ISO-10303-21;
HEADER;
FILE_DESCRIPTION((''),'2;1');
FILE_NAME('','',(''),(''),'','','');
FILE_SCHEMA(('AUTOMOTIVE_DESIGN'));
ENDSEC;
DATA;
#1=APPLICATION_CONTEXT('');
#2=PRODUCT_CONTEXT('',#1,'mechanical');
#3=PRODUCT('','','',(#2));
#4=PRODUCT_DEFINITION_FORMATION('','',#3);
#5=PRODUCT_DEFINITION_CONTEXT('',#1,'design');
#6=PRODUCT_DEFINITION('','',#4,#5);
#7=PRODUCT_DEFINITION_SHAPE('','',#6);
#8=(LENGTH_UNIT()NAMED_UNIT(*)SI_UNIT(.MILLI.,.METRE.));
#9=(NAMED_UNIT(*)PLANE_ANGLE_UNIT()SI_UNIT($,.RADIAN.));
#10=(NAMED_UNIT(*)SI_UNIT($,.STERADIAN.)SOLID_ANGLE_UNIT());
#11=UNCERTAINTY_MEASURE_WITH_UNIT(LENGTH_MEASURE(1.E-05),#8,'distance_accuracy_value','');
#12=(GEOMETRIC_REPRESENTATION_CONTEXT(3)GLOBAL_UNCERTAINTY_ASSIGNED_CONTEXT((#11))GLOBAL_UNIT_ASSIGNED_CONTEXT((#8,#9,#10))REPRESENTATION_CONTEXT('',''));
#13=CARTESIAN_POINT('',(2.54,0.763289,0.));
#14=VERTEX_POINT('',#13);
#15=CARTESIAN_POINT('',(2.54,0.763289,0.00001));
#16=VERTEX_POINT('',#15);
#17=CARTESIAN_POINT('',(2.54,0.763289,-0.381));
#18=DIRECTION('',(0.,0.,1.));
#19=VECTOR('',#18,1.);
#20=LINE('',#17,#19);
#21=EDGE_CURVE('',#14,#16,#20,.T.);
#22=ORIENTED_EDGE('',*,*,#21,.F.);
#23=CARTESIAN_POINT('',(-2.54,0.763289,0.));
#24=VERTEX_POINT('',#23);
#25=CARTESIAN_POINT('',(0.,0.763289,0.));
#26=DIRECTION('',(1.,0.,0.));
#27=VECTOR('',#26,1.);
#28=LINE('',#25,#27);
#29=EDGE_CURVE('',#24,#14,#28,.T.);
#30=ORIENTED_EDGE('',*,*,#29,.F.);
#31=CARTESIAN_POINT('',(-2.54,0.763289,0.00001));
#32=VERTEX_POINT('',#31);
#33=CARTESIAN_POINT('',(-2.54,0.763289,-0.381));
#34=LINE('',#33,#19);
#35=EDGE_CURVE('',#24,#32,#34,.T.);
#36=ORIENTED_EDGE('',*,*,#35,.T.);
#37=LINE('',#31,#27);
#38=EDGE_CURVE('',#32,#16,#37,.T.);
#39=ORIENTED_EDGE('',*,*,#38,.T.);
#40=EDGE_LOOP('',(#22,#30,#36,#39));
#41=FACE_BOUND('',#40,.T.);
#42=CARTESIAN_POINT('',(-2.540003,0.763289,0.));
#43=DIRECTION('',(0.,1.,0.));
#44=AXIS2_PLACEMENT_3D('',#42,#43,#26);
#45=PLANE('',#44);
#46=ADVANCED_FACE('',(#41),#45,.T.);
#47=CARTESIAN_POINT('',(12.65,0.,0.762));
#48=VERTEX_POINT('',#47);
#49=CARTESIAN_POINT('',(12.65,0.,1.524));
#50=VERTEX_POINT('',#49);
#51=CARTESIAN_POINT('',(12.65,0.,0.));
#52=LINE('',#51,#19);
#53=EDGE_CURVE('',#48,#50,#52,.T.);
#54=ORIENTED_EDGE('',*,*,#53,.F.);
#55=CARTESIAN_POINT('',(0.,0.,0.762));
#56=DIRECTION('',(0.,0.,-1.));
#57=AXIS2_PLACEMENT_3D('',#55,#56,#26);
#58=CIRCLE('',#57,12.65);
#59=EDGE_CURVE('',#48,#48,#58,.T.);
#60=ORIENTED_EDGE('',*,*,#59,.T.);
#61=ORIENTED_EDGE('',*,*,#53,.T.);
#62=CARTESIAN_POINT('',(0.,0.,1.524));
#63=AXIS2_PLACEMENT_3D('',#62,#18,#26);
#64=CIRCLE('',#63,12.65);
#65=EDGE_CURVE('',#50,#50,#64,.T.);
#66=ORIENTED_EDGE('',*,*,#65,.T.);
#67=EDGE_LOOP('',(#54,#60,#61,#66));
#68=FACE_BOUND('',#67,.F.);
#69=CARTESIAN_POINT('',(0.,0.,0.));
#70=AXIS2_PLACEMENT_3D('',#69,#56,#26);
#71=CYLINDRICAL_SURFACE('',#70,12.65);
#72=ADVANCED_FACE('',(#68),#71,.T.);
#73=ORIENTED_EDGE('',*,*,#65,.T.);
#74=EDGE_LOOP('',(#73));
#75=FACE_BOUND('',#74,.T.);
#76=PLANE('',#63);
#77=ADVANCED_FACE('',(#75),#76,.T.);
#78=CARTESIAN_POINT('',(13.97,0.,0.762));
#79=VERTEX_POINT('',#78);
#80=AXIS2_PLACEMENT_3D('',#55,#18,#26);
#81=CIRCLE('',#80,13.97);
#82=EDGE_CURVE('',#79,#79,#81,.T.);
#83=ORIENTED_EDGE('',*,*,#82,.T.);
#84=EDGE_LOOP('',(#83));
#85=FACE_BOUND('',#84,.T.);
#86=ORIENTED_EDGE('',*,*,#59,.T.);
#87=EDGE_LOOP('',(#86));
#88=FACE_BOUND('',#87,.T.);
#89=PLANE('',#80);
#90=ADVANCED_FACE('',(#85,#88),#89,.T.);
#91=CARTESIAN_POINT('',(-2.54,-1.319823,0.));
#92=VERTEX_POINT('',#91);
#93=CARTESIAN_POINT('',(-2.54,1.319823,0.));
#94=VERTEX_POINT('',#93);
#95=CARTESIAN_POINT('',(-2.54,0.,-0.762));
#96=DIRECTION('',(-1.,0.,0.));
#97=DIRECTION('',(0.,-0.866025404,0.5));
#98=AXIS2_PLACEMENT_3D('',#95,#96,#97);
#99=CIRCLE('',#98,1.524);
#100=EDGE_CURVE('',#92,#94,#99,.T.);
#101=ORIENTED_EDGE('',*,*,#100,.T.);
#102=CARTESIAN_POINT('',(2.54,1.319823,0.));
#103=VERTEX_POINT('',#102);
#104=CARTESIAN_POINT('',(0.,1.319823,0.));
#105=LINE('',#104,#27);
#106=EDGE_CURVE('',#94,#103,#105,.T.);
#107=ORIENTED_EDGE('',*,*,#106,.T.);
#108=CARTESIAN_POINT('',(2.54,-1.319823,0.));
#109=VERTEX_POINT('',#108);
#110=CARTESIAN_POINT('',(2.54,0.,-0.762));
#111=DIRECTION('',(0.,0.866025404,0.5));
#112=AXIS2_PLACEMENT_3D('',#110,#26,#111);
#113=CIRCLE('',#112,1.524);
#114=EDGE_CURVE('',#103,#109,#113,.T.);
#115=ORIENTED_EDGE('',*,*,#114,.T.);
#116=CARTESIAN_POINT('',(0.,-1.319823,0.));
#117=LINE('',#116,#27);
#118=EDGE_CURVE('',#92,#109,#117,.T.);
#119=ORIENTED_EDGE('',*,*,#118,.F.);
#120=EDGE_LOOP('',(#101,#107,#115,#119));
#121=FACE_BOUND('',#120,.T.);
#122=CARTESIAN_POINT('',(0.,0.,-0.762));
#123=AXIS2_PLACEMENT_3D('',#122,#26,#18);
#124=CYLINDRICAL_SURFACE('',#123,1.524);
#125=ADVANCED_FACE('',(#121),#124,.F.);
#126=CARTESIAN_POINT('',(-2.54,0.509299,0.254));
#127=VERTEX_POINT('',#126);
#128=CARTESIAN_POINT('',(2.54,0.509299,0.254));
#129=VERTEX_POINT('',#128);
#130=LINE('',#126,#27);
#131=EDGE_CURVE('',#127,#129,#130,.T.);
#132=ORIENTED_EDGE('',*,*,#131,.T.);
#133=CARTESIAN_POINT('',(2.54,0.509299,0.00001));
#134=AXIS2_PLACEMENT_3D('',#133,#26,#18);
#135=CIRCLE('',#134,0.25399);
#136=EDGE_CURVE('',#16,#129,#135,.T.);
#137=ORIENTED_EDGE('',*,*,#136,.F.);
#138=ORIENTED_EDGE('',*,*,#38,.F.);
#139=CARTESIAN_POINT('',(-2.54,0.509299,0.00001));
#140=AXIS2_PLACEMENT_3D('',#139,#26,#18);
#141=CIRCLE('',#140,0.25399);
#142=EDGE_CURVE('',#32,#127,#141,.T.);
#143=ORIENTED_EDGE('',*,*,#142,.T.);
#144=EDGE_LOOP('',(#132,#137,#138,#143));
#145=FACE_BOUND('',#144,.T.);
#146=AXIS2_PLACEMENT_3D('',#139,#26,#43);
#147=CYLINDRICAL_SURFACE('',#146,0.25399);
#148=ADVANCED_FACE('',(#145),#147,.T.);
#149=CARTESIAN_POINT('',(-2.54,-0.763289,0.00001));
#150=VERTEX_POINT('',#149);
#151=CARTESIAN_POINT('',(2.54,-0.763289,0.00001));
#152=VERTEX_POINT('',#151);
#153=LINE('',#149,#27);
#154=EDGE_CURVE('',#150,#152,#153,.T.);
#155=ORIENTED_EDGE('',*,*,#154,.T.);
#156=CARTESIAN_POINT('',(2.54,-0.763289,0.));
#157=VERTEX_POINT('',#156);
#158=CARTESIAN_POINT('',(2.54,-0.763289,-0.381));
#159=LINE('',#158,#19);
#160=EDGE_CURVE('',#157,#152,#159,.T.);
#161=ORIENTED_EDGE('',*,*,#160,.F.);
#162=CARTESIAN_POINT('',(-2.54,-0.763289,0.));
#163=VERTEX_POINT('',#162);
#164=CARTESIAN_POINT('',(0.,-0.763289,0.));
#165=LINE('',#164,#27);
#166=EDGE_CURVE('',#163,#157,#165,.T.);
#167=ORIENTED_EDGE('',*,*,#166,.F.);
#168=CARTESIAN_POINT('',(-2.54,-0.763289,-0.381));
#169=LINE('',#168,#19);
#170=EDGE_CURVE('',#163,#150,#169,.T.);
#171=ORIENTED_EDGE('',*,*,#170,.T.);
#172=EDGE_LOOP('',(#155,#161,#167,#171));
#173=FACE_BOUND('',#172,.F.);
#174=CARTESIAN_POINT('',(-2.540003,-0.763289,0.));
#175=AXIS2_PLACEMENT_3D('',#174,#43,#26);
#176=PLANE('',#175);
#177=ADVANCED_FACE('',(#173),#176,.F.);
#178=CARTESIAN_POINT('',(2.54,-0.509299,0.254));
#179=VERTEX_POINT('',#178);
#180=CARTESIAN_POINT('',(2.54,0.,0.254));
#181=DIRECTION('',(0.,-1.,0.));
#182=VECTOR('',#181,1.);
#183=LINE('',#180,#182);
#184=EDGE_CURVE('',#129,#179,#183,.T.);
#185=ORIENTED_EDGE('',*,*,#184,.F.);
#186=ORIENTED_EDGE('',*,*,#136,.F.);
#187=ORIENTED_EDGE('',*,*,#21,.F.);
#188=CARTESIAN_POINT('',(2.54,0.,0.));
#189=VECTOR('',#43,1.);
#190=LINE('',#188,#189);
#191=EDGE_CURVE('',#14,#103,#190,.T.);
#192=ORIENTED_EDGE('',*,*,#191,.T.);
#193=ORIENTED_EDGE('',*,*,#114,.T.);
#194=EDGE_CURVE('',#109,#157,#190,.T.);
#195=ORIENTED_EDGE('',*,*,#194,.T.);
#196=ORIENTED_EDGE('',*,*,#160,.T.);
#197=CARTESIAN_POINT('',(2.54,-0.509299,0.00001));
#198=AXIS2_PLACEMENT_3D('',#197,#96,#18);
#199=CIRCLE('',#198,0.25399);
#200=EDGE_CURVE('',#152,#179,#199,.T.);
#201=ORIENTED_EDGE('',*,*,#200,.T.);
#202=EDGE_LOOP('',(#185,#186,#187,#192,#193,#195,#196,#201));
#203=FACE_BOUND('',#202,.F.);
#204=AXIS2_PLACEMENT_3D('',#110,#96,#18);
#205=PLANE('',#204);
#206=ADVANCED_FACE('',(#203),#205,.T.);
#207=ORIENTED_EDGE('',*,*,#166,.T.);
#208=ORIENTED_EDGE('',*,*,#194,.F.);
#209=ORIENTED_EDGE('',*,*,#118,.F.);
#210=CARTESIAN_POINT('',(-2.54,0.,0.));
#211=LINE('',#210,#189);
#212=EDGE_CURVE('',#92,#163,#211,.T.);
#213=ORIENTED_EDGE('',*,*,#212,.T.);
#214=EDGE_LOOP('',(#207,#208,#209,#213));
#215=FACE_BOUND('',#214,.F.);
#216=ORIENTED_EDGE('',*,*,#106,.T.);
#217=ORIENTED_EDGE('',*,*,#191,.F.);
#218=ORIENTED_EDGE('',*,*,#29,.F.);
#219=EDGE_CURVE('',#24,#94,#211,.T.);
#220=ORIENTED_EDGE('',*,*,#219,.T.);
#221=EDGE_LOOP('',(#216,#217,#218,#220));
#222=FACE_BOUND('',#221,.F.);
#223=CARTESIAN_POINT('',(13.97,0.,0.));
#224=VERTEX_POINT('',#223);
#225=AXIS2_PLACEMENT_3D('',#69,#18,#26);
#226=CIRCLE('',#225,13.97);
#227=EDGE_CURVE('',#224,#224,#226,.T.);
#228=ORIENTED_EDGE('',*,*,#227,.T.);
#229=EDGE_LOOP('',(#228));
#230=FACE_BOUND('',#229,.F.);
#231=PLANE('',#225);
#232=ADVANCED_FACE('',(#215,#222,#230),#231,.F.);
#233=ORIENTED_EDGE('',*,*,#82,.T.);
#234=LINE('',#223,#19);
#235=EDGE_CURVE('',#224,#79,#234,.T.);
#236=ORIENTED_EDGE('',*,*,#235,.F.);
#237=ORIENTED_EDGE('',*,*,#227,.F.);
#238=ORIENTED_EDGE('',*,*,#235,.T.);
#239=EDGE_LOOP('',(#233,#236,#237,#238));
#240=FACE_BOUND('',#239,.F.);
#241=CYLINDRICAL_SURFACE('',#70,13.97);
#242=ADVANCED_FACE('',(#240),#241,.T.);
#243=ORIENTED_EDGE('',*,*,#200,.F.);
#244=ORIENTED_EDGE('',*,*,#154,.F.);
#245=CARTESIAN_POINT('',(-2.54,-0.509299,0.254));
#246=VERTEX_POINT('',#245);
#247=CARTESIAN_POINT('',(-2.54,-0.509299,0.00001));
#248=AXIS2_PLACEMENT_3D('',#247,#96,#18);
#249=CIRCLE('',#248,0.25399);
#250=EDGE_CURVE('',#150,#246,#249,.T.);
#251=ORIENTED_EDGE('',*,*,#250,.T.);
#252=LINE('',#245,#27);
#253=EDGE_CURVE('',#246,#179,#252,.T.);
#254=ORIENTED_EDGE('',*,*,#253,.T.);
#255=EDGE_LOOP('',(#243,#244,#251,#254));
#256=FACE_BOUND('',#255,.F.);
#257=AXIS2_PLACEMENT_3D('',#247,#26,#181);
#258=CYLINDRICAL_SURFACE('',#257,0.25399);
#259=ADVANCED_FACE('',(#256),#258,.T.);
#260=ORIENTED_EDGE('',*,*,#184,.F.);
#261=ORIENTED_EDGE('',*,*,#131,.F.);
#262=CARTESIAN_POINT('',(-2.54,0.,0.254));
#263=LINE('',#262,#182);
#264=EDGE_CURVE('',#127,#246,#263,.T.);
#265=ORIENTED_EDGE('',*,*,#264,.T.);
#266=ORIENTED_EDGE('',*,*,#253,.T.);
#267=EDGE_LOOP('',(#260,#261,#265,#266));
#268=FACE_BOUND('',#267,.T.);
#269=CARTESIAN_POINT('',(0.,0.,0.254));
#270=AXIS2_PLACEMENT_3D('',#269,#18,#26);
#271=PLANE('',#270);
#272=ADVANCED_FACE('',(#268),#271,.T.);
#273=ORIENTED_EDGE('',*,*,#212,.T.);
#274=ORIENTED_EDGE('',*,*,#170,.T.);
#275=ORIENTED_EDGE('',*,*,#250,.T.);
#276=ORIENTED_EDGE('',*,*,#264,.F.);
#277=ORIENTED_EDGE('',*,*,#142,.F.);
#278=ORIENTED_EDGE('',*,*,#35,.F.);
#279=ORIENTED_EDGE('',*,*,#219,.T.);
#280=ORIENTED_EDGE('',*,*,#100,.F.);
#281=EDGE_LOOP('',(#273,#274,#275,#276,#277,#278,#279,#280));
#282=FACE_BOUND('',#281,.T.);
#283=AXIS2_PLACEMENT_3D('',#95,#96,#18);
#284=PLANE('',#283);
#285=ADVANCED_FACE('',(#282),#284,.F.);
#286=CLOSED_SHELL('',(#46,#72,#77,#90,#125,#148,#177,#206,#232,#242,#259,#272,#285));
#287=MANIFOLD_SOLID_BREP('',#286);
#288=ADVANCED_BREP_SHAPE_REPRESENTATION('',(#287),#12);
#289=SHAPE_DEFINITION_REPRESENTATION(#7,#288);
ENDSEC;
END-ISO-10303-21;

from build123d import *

# Parameters (mm, degrees)
F0_R     = 12.65
F1_DEPTH = 1.524
F2_R     = 13.97
F3_DEPTH = 0.762
F4_W     = 5.08
F4_H     = 1.524
F6_W     = 5.08000508
F6_H     = 1.5265774739
F7_DEPTH = 0.254
F8_R     = 0.25399


# Not quite as in the source:
# - a fillet or chamfer is up to 0.001 mm smaller than in the source, because OpenCascade refuses the exact size


with BuildPart() as f1:
    # F0 (on Top) → F1 (new body)
    with BuildSketch(Plane.XY):
        Circle(F0_R)
    extrude(amount=F1_DEPTH)

    # F2 (on Top) → F3 (join)
    with BuildSketch(Plane.XY):
        Circle(F2_R)
    extrude(amount=F3_DEPTH)

    # F4 (on Front) → F5 (revolve, cut)
    with BuildSketch(Plane.XZ):
        Rectangle(F4_W, F4_H)
    revolve(axis=Axis((0, 0, -0.762), (-1, 0, 0)), mode=Mode.SUBTRACT)

    # F6 (on Top) → F7 (join)
    with BuildSketch(Plane.XY):
        Rectangle(F6_W, F6_H)
    extrude(amount=F7_DEPTH)

    # F8 (radius 0.254 in the source; OpenCascade refuses exactly that, so slightly less here)
    f8_edges = [f1.edges().sort_by_distance(p)[0] for p in [
        (0, 0.763289, 0.254),
        (0, -0.763289, 0.254),
    ]]
    fillet(f8_edges, radius=F8_R)


solid = f1.part
